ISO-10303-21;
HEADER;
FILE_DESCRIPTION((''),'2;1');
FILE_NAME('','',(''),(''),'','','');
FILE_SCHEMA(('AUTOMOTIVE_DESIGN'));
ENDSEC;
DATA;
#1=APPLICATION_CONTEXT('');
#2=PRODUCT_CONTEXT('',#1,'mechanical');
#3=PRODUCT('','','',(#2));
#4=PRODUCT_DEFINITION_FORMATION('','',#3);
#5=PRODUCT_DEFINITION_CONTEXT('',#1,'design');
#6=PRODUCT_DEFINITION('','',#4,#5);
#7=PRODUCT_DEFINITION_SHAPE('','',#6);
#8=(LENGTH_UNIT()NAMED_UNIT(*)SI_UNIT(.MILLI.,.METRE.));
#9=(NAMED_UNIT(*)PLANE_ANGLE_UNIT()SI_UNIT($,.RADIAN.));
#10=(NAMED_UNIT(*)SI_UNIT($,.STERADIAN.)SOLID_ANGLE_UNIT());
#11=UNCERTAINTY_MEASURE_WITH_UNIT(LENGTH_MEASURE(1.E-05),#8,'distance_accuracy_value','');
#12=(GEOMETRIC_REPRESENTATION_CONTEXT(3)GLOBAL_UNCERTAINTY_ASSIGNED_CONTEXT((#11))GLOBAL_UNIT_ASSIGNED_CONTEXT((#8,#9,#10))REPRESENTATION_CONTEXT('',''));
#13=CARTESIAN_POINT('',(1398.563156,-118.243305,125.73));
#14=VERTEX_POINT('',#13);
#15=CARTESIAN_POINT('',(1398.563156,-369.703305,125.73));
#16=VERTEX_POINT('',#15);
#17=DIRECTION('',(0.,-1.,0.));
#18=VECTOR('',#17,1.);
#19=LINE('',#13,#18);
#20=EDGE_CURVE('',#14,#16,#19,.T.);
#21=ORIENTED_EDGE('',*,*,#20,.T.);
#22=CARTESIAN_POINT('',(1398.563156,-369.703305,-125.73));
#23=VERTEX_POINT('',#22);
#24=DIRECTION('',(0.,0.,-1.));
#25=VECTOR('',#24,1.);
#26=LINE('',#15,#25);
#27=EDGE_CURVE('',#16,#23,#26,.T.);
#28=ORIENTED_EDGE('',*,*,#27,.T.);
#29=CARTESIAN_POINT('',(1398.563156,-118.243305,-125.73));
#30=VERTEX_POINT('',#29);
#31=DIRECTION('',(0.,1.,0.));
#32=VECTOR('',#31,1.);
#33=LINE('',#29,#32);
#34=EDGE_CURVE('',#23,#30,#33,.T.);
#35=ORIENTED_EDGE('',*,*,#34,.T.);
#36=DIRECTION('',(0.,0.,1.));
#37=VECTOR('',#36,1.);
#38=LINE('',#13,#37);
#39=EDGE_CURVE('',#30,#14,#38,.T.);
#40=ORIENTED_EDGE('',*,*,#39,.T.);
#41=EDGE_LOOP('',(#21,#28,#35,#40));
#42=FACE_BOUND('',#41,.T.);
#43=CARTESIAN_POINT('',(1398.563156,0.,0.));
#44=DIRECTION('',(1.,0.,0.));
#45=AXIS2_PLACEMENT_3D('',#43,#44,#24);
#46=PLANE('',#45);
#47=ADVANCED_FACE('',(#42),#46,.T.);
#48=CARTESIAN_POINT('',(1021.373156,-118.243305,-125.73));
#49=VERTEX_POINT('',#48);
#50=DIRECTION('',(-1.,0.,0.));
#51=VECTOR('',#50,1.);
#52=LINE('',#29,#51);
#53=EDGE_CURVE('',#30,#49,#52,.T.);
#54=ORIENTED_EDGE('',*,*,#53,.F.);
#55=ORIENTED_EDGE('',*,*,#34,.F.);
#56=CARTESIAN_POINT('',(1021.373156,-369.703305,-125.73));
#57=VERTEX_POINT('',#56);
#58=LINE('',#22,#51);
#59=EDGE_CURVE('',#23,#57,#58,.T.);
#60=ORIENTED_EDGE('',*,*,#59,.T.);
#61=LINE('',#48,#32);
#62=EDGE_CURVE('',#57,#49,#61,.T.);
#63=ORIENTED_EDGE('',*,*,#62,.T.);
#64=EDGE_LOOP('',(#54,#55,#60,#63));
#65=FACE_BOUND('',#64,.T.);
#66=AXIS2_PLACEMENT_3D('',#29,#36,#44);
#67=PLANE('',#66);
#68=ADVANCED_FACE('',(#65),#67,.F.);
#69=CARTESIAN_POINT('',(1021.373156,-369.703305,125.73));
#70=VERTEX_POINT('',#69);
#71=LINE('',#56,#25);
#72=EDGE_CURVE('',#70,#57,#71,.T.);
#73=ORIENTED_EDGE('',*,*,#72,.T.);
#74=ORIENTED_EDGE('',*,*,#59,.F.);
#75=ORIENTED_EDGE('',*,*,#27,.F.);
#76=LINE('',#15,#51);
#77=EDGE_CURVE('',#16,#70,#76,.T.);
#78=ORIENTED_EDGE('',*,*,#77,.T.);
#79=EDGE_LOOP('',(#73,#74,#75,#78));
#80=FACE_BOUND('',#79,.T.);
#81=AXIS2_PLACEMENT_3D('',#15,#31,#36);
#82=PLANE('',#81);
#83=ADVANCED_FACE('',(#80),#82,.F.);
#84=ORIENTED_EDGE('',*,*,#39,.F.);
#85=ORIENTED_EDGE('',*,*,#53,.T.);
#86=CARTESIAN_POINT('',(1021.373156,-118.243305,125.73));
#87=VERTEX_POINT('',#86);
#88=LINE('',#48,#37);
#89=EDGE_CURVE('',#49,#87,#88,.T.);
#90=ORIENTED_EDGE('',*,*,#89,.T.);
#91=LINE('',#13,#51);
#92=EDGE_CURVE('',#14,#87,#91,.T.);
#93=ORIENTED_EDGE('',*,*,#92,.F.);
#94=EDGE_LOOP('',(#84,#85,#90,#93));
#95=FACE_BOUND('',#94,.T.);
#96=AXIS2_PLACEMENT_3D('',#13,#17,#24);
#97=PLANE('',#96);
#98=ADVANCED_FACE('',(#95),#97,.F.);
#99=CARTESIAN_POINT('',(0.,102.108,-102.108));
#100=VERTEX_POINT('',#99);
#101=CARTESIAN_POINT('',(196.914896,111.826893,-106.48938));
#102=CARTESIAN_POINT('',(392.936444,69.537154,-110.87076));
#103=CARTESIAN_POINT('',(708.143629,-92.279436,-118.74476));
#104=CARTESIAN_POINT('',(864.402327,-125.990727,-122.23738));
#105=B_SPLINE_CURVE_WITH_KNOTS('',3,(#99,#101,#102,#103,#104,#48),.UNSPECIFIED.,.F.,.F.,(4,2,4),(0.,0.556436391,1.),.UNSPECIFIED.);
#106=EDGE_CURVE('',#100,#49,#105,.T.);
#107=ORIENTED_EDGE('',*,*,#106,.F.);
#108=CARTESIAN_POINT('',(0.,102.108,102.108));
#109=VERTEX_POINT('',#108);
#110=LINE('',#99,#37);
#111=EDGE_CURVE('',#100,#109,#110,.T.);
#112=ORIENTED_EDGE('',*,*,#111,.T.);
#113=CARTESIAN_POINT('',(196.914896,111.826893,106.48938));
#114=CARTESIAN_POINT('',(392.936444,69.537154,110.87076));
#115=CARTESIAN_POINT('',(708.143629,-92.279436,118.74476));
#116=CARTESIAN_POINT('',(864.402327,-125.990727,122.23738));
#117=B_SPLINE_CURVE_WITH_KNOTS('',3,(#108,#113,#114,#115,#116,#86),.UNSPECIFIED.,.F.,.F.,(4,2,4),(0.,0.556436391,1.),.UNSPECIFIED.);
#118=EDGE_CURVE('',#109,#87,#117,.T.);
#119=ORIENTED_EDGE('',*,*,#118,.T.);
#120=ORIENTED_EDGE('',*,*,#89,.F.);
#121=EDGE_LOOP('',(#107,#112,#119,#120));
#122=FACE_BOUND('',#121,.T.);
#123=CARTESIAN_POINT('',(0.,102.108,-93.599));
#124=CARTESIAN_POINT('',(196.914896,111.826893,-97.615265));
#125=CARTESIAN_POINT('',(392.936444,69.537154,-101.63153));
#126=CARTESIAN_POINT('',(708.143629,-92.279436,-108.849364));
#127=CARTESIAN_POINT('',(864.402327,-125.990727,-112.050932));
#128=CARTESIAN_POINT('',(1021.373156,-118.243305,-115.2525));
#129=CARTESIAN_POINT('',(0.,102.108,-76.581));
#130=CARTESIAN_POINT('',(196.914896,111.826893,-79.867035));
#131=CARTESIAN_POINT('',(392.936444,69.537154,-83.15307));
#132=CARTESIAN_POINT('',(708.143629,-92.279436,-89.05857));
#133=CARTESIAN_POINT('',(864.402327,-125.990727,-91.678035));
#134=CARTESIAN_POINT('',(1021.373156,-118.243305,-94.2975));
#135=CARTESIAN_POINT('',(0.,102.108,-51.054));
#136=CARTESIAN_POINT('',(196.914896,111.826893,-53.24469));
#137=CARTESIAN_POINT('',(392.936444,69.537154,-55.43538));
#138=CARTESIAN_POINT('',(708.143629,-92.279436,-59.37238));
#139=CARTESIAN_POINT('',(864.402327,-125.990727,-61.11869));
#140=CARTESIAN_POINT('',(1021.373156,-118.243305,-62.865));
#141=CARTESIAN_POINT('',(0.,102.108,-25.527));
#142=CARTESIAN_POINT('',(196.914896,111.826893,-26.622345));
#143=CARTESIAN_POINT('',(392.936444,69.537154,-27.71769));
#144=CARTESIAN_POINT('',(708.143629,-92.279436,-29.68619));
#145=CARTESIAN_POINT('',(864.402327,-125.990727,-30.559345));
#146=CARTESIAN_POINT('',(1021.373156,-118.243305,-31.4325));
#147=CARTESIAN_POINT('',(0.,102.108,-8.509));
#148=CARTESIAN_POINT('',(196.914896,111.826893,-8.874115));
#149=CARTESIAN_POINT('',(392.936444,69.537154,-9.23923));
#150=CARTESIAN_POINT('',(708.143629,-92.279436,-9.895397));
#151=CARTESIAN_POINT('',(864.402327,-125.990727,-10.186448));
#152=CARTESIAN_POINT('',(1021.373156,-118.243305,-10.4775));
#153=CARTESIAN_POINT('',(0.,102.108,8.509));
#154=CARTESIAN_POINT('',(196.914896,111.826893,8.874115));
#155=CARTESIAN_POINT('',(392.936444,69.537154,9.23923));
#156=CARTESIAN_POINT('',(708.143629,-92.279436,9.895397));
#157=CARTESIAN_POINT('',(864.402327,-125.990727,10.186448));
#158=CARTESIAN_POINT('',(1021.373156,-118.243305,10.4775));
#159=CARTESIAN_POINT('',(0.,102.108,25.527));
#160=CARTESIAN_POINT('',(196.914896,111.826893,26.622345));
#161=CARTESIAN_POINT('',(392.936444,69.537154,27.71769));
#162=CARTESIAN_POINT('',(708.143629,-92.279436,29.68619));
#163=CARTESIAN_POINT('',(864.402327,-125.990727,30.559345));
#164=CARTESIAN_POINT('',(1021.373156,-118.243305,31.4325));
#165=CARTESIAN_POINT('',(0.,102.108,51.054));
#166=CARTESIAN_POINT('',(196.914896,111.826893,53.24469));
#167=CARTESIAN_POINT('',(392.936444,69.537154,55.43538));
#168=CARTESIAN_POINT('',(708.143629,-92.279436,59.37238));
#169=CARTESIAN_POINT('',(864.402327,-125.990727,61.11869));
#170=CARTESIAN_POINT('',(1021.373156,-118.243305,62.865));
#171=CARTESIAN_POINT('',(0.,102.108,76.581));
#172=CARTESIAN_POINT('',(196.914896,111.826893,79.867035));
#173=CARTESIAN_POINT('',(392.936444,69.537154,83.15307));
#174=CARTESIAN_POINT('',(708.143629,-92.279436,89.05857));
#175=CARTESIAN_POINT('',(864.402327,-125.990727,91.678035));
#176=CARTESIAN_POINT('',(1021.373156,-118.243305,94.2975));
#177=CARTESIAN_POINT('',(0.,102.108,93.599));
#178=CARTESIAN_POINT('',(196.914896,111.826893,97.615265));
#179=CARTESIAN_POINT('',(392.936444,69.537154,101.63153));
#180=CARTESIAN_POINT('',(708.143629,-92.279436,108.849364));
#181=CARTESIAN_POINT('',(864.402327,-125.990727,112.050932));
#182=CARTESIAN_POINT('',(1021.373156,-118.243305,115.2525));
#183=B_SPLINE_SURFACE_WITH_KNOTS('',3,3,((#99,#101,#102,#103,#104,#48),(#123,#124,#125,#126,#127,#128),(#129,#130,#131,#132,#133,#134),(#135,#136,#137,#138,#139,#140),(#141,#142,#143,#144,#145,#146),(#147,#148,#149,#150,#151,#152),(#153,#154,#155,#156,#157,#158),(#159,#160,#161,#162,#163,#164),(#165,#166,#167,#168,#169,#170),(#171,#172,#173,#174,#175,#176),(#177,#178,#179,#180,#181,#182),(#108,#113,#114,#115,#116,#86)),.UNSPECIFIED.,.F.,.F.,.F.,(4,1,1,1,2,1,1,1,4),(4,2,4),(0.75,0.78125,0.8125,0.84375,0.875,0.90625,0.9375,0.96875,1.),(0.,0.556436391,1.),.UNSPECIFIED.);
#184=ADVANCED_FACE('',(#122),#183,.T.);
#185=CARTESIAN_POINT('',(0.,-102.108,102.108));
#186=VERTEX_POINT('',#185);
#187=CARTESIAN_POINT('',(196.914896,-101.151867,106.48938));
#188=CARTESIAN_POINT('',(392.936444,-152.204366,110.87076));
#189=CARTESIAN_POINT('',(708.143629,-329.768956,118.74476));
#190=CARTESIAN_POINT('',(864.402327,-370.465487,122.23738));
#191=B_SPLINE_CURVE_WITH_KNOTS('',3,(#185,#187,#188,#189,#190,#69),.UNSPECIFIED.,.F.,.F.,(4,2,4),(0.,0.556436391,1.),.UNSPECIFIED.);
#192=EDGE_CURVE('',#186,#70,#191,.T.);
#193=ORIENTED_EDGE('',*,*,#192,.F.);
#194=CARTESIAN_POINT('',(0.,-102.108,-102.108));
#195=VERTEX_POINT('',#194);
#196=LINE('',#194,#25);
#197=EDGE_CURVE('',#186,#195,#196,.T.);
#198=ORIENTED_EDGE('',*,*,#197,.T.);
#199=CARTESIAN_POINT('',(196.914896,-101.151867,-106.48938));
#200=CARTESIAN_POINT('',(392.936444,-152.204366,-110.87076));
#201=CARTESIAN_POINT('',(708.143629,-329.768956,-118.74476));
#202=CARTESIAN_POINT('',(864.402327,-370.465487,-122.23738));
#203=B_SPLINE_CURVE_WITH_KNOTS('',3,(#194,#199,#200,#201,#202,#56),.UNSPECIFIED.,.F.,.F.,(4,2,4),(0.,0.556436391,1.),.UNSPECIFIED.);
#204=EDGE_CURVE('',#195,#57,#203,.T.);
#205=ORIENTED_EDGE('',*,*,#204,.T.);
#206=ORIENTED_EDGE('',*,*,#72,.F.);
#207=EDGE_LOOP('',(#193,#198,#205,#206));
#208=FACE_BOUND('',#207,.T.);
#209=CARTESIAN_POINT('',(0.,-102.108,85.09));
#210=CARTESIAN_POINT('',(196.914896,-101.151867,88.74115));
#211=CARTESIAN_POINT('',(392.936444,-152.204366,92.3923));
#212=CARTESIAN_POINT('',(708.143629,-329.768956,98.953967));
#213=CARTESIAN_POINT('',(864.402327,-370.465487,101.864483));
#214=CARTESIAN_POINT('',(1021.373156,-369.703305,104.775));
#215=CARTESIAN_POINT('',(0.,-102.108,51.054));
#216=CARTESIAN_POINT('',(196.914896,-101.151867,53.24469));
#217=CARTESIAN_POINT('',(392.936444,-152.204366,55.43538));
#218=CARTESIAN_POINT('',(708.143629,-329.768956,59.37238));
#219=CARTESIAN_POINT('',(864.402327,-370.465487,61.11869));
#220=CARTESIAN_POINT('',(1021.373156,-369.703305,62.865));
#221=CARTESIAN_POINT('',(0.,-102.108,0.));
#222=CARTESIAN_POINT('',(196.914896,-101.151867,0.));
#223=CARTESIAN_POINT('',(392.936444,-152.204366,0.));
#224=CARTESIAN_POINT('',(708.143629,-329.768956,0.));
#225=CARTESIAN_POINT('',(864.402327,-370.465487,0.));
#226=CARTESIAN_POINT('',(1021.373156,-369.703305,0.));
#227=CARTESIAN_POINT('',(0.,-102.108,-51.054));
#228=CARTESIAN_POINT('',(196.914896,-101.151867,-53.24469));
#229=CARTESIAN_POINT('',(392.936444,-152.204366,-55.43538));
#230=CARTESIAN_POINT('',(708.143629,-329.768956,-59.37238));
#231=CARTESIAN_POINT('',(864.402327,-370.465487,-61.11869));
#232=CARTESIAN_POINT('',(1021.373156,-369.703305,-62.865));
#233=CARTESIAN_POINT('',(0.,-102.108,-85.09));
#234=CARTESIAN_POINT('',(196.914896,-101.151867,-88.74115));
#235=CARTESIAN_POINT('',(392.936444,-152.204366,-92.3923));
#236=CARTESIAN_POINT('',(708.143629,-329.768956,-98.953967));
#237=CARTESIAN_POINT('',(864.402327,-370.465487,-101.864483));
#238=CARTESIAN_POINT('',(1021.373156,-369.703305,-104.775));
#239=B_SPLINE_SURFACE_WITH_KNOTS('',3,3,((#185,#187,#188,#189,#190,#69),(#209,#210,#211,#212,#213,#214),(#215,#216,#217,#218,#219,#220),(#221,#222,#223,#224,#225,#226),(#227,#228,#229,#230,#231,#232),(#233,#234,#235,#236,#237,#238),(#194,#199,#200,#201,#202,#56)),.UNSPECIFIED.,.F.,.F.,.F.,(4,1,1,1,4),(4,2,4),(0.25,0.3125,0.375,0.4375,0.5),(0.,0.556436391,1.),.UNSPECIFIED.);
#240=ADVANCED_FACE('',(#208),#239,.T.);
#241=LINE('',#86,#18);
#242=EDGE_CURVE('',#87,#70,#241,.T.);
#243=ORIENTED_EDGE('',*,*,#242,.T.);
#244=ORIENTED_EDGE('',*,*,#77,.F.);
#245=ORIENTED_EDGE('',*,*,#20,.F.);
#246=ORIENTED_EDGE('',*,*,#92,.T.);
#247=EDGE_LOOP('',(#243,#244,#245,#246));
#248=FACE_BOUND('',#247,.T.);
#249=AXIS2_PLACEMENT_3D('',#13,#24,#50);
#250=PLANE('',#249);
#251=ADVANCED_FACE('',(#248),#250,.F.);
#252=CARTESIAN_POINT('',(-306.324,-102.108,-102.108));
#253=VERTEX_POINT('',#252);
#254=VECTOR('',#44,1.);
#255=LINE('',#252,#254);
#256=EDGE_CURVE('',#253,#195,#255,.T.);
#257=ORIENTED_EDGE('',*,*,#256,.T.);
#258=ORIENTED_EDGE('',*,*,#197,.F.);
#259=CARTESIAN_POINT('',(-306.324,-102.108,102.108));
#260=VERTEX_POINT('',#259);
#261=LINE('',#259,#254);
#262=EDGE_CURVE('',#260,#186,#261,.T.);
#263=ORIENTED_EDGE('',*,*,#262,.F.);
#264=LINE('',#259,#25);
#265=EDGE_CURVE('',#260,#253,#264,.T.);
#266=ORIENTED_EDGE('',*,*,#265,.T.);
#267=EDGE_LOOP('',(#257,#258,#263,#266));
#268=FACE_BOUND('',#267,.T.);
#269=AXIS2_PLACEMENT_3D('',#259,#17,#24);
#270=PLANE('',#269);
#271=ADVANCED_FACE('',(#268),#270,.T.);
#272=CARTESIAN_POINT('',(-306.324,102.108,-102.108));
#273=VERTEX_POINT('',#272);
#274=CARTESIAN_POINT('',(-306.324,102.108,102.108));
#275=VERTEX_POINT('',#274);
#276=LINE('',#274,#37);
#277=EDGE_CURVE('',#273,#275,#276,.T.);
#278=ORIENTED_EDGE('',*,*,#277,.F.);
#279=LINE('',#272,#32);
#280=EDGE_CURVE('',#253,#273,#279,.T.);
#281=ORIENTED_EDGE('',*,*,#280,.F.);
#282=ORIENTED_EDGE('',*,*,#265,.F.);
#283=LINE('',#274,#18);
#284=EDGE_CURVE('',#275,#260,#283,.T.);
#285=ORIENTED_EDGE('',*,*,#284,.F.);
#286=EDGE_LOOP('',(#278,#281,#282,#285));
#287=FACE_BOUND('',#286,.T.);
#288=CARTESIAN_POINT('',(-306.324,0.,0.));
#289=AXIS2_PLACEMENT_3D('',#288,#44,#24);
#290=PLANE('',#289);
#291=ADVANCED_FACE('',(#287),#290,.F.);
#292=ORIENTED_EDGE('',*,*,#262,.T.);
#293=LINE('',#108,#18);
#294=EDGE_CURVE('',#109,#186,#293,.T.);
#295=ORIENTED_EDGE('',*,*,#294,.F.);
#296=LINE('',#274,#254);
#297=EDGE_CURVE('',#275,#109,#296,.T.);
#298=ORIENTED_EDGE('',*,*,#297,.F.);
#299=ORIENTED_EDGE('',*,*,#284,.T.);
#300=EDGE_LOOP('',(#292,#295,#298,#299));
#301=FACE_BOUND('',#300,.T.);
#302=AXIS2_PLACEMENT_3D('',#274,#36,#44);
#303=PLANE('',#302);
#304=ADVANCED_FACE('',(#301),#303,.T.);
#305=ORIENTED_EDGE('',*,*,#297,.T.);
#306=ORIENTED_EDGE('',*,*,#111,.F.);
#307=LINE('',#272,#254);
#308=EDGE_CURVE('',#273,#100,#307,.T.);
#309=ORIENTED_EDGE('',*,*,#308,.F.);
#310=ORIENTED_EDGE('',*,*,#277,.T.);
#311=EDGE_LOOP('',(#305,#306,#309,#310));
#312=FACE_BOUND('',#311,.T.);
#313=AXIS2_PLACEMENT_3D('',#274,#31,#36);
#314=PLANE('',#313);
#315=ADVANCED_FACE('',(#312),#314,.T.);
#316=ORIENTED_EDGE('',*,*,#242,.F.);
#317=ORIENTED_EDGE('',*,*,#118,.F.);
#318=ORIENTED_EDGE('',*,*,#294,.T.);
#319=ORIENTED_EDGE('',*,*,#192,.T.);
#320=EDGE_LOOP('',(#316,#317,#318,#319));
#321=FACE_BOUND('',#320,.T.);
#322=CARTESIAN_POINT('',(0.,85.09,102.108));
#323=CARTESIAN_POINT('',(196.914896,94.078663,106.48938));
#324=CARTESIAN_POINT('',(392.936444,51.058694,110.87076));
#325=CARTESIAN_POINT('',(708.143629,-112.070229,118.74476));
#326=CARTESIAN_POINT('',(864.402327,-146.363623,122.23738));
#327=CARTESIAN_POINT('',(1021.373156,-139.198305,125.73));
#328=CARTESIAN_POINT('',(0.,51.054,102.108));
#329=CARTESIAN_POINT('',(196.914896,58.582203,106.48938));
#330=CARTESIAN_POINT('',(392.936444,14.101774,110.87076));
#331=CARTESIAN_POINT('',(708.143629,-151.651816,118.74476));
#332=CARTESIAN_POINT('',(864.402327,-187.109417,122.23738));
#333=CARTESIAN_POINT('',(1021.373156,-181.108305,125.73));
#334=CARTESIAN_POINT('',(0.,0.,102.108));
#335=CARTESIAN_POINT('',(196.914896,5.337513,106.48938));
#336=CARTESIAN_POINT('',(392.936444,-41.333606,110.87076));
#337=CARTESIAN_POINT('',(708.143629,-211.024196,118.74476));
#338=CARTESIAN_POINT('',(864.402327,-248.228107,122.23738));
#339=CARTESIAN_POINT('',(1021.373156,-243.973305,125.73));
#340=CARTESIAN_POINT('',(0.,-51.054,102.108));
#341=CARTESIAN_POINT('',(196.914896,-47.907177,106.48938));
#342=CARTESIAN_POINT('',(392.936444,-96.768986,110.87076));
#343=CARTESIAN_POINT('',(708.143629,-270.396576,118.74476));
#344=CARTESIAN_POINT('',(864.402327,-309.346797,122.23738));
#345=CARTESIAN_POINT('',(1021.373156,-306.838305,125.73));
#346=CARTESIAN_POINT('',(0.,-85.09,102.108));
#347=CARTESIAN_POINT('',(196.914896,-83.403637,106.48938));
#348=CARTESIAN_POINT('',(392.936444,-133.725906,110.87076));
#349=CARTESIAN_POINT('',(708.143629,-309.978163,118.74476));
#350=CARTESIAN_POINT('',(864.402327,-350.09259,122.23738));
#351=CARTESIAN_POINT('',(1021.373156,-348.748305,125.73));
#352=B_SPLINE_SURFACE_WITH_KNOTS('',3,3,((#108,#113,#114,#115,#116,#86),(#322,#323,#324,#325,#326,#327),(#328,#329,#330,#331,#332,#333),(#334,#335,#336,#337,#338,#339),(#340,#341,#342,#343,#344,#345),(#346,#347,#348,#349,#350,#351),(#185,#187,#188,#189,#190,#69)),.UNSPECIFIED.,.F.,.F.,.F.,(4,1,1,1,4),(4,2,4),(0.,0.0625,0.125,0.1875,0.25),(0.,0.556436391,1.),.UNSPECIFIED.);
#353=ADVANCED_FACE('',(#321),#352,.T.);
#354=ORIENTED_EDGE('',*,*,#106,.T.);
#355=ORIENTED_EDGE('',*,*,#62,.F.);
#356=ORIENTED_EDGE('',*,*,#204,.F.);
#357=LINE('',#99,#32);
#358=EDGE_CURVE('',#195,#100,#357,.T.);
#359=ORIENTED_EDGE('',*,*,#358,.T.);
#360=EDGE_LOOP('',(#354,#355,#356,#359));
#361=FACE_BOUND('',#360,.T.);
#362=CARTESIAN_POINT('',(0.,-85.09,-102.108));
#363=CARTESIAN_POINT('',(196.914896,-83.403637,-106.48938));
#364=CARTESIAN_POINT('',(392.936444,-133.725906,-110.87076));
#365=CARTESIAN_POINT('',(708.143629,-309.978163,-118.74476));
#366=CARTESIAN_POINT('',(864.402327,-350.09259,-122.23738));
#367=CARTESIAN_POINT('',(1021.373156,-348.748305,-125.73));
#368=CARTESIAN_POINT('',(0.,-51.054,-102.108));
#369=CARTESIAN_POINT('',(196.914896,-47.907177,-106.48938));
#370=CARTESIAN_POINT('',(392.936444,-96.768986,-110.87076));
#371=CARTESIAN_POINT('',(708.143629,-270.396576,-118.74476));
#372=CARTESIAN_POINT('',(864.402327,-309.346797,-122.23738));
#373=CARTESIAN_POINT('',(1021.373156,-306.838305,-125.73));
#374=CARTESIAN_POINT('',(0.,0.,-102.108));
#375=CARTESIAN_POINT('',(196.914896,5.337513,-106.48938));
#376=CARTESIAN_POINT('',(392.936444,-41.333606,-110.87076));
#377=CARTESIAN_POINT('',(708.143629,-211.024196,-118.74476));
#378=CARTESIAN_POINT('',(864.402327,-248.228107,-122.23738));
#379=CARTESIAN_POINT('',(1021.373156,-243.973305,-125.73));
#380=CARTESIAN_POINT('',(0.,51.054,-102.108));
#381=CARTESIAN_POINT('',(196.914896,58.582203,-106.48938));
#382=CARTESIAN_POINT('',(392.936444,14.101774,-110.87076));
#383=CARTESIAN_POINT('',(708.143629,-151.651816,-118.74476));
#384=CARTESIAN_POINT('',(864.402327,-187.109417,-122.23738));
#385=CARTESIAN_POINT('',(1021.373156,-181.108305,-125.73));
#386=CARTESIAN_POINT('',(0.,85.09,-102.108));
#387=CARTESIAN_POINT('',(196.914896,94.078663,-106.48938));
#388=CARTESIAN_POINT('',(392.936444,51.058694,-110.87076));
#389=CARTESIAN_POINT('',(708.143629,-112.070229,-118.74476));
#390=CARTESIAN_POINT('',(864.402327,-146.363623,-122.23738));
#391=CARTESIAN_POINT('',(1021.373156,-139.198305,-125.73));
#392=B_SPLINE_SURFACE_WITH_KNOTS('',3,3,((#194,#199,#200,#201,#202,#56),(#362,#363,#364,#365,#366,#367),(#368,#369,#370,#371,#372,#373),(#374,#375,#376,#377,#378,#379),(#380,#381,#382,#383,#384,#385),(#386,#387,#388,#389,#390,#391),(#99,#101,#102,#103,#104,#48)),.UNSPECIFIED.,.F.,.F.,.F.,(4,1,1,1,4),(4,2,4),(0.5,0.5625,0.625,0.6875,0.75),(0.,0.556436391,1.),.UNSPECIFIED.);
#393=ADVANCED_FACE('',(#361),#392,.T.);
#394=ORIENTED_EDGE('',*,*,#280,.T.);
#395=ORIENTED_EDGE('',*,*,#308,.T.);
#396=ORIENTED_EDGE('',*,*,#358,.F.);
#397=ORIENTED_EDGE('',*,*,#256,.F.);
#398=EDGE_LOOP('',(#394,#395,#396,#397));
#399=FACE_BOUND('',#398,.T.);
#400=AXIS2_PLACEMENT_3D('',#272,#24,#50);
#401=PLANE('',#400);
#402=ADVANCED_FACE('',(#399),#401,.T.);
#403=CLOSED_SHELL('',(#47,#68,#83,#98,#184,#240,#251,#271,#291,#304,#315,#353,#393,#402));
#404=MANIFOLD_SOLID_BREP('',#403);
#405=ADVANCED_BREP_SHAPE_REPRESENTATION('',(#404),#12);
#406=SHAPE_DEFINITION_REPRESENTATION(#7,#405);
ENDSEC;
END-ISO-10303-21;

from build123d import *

# Parameters (mm, degrees)
LOFT1_START         = -125.7300001
LOFT1_DEPTH         = 251.4600001
LOFT1_START_2       = -371
LOFT1_2_DEPTH       = 475
SKETCH6_W           = 204.216
SKETCH6_H           = 204.216
BOSS_EXTRUDE1_DEPTH = 306.324
SKETCH8_W           = 251.46
SKETCH8_H           = 251.46
BOSS_EXTRUDE2_DEPTH = 377.19


with BuildPart() as part:
    # Loft1: read off the stored shape, not the designer's step
    # Loft1 outline → Loft1 (new body)
    with BuildSketch(Plane.XY.offset(LOFT1_START)):
        with BuildLine():
            Line((1021.373155762, -369.703305112), (1021.373155762, -118.243305112))
            add(Edge.make_bspline(
                [(0, 102.108), (196.914895518, 111.82689324), (392.936444227, 69.537154328), (708.143629326, -92.279435597), (864.402326567, -125.990726792), (1021.373155762, -118.243305112)],
                knots=[0, 0, 0, 0, 0.556436391, 0.556436391, 1, 1, 1, 1], degree=3))
            Line((0, 102.108), (0, -102.108))
            add(Edge.make_bspline(
                [(0, -102.108), (196.914895518, -101.151867047), (392.936444227, -152.204366245), (708.143629326, -329.768956171), (864.402326567, -370.465487079), (1021.373155762, -369.703305112)],
                knots=[0, 0, 0, 0, 0.556436391, 0.556436391, 1, 1, 1, 1], degree=3))
        make_face()
    extrude(amount=LOFT1_DEPTH)

    # Loft1 2 outline → Loft1 2 (cut)
    with BuildSketch(Plane(origin=(0, 0, 0), x_dir=(1, 0, 0), z_dir=(0, 1, 0)).offset(LOFT1_START_2)):
        with BuildLine():
            Line((0, 125.7300001), (0, 102.108))
            add(Edge.make_bspline(
                [(0, 102.108), (196.914895518, 106.489380143), (392.936444227, 110.870760287), (708.143629326, 118.744760287), (864.402326567, 122.237380143), (1021.373155762, 125.73)],
                knots=[0, 0, 0, 0, 0.556436391, 0.556436391, 1, 1, 1, 1], degree=3))
            Line((1021.373155762, 125.73), (0, 125.7300001))
        make_face()
        with BuildLine():
            add(Edge.make_bspline(
                [(0, -102.108), (196.914895518, -106.489380143), (392.936444227, -110.870760287), (708.143629326, -118.744760287), (864.402326567, -122.237380143), (1021.373155762, -125.73)],
                knots=[0, 0, 0, 0, 0.556436391, 0.556436391, 1, 1, 1, 1], degree=3))
            Line((0, -102.108), (0, -125.73))
            Line((0, -125.73), (1021.373155762, -125.73))
        make_face()
    extrude(amount=LOFT1_2_DEPTH, mode=Mode.SUBTRACT)

    # Sketch6 → Boss-Extrude1 (add)
    with BuildSketch(Plane(origin=(0, 0, 0), x_dir=(0, 0, -1), z_dir=(1, 0, 0))):
        Rectangle(SKETCH6_W, SKETCH6_H)
    extrude(amount=-BOSS_EXTRUDE1_DEPTH)

    # Sketch8 → Boss-Extrude2 (add)
    with BuildSketch(Plane(origin=(1021.373155762, 0, 0), x_dir=(0, 0, -1), z_dir=(1, 0, 0))):
        with Locations((0, -243.973305112)):
            Rectangle(SKETCH8_W, SKETCH8_H)
    extrude(amount=BOSS_EXTRUDE2_DEPTH)


solid = part.part
